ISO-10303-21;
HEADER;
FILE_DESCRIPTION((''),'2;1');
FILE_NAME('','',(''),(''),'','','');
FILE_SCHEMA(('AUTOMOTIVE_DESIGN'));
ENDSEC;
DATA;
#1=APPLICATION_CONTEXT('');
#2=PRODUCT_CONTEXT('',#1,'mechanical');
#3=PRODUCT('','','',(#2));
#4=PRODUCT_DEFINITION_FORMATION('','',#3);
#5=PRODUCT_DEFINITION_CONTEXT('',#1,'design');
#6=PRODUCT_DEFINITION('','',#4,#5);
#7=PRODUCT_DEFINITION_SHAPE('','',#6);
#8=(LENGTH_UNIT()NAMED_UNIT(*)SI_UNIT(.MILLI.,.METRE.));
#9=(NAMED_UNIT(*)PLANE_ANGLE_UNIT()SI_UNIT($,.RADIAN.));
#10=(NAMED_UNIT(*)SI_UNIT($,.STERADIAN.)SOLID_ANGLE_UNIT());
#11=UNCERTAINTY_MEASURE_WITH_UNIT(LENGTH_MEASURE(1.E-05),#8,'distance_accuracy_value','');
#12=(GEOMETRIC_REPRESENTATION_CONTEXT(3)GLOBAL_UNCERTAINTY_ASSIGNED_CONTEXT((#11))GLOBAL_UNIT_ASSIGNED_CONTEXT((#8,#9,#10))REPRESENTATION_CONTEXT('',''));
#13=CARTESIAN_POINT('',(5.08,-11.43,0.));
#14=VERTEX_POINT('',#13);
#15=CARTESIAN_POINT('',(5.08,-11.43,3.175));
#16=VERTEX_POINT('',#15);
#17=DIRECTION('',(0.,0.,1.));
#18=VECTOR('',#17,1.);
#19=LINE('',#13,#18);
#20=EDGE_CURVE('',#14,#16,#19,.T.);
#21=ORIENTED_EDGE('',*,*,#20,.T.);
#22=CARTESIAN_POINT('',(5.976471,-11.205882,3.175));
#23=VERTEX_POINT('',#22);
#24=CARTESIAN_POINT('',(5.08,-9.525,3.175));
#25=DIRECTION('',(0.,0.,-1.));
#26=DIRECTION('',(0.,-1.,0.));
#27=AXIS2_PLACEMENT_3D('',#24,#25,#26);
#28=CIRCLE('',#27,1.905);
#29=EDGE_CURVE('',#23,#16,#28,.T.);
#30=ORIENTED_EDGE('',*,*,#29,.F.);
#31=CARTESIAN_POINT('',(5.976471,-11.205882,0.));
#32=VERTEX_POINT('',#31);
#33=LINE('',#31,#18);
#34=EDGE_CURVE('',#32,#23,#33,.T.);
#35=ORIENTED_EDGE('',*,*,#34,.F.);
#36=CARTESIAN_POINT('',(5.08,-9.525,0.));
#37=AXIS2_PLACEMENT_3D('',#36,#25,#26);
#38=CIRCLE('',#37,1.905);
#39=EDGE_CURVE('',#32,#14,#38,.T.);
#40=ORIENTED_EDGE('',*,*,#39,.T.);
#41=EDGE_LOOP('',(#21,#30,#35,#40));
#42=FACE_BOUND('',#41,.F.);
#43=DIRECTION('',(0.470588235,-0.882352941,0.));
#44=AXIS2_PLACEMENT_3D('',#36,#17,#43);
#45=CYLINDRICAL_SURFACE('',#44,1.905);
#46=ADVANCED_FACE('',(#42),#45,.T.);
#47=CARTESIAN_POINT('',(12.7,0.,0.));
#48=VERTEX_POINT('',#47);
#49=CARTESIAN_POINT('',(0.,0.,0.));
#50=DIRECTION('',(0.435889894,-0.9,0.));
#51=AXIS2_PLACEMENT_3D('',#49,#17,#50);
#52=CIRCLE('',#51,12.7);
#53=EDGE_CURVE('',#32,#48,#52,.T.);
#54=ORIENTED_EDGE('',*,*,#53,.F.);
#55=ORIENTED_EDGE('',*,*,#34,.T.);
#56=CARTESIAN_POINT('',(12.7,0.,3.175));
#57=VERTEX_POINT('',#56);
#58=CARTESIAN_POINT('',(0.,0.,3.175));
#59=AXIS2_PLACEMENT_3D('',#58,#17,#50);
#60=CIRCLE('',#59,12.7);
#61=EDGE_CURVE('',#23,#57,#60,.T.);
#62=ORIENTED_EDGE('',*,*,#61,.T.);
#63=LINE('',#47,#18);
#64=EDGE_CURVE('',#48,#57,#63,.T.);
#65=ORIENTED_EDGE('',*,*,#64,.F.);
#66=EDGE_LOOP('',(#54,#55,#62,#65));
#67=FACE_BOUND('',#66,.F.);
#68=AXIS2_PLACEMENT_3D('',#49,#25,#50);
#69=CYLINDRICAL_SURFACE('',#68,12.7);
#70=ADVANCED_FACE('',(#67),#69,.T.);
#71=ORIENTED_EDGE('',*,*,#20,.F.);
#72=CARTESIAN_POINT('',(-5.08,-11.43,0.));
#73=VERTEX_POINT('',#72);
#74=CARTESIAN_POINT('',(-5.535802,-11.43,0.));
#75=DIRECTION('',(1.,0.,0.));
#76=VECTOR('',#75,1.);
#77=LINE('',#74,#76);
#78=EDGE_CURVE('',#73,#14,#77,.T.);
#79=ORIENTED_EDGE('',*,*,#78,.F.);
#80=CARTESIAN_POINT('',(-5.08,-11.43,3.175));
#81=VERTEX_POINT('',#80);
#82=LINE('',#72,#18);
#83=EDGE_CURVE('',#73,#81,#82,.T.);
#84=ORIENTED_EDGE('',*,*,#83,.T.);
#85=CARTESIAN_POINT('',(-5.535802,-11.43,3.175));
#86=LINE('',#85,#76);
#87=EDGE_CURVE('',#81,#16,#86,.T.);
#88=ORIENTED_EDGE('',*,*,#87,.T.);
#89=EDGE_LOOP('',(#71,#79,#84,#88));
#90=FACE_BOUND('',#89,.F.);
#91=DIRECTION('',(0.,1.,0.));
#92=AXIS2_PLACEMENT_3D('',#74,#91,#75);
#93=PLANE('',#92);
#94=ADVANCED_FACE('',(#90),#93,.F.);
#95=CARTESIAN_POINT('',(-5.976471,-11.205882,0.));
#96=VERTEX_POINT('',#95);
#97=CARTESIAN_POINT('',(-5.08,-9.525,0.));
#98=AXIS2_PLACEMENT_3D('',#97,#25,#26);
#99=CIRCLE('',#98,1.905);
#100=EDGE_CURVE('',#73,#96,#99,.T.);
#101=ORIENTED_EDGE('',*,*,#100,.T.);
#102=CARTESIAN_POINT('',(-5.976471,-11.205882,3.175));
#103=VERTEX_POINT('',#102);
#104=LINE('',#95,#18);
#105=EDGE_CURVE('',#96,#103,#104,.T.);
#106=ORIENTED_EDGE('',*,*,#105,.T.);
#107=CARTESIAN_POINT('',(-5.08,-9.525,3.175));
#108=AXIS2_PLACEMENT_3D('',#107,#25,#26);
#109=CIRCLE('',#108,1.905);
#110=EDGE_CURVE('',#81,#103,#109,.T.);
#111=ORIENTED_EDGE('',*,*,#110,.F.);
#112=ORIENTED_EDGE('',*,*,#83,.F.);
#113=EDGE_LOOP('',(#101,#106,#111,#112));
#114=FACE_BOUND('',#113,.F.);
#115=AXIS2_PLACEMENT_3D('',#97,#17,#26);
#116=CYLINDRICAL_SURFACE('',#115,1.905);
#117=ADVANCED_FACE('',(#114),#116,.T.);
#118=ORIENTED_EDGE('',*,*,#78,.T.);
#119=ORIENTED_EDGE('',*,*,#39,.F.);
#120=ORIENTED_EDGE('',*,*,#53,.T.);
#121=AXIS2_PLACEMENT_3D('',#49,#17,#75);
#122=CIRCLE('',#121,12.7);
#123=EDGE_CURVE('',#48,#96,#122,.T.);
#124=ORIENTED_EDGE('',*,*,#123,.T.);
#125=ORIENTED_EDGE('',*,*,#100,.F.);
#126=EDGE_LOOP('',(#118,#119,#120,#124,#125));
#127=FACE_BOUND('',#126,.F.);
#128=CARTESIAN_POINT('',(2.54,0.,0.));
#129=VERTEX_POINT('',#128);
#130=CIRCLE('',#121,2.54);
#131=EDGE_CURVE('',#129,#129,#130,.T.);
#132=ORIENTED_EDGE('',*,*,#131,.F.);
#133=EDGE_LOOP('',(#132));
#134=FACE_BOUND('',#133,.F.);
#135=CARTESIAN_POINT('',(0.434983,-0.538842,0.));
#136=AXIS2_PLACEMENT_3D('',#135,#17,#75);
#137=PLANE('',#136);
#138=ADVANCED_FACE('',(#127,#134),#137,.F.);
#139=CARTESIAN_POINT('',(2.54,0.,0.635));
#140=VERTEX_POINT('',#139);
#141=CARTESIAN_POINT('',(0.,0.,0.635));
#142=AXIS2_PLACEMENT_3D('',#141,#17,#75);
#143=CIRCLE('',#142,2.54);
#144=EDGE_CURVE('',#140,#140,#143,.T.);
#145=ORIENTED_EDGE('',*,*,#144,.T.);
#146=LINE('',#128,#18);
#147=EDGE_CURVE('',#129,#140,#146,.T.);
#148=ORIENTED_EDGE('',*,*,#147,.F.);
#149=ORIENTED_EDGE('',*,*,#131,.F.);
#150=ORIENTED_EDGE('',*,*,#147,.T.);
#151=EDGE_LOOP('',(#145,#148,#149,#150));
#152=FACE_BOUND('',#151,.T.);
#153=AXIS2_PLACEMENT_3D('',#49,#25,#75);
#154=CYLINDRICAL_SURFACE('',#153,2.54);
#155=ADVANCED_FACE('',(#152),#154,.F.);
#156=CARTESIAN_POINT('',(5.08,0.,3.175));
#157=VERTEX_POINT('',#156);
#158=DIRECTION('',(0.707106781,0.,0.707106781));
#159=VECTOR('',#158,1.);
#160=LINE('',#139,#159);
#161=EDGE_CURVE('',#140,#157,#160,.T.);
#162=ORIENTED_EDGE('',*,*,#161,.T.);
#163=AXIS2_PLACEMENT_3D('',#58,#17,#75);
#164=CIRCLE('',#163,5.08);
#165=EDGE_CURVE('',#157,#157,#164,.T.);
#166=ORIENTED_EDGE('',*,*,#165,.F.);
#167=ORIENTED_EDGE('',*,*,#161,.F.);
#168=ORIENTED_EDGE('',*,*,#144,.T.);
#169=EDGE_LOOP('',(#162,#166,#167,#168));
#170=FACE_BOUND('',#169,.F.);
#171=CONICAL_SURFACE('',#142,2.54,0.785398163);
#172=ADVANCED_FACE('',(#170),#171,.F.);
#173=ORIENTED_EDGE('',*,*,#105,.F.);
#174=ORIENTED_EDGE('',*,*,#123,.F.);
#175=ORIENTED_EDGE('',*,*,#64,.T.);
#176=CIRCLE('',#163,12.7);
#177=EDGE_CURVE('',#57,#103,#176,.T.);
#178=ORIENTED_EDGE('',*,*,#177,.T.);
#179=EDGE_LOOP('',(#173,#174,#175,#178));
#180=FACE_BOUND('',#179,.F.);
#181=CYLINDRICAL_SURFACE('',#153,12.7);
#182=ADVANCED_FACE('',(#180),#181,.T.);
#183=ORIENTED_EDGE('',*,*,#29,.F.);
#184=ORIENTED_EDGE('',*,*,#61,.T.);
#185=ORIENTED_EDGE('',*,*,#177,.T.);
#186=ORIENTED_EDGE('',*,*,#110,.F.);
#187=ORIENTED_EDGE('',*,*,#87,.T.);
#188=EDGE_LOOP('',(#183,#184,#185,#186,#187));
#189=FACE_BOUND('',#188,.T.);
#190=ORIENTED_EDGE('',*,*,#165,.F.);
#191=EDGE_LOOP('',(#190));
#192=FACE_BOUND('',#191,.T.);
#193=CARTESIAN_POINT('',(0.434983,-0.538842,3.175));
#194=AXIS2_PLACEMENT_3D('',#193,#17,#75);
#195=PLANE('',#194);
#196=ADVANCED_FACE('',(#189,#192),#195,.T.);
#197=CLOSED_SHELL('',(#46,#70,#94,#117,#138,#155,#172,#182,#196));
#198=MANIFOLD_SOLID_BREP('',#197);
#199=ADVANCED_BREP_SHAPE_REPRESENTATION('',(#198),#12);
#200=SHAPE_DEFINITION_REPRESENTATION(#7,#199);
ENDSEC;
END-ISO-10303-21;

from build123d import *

# Parameters (mm, degrees)
F0_R     = 2.54
F1_DEPTH = 3.175
F2_SIZE2 = 2.54
F2_SIZE  = 2.54
F3_R     = 1.905


with BuildPart() as f1:
    # F0 (on Top) → F1 (new body)
    with BuildSketch(Plane.XY):
        with BuildLine():
            ThreePointArc((5.5358016583, -11.43), (10.7609172718, -6.7448246434), (12.7, 0))
            ThreePointArc((12.7, 0), (-6.7448246434, 10.7609172718), (-5.5358016583, -11.43))
            Line((-5.5358016583, -11.43), (5.5358016583, -11.43))
        make_face()
        Circle(F0_R, mode=Mode.SUBTRACT)
    extrude(amount=F1_DEPTH)

    # F2
    f2_edges = [f1.edges().sort_by_distance(p)[0] for p in [
        (-2.54, 0, 3.175),
    ]]
    chamfer(f2_edges, length=F2_SIZE, length2=F2_SIZE2)

    # F3
    f3_edges = [f1.edges().sort_by_distance(p)[0] for p in [
        (-5.535802, -11.43, 1.5875),
        (5.535802, -11.43, 1.5875),
    ]]
    fillet(f3_edges, radius=F3_R)


solid = f1.part
